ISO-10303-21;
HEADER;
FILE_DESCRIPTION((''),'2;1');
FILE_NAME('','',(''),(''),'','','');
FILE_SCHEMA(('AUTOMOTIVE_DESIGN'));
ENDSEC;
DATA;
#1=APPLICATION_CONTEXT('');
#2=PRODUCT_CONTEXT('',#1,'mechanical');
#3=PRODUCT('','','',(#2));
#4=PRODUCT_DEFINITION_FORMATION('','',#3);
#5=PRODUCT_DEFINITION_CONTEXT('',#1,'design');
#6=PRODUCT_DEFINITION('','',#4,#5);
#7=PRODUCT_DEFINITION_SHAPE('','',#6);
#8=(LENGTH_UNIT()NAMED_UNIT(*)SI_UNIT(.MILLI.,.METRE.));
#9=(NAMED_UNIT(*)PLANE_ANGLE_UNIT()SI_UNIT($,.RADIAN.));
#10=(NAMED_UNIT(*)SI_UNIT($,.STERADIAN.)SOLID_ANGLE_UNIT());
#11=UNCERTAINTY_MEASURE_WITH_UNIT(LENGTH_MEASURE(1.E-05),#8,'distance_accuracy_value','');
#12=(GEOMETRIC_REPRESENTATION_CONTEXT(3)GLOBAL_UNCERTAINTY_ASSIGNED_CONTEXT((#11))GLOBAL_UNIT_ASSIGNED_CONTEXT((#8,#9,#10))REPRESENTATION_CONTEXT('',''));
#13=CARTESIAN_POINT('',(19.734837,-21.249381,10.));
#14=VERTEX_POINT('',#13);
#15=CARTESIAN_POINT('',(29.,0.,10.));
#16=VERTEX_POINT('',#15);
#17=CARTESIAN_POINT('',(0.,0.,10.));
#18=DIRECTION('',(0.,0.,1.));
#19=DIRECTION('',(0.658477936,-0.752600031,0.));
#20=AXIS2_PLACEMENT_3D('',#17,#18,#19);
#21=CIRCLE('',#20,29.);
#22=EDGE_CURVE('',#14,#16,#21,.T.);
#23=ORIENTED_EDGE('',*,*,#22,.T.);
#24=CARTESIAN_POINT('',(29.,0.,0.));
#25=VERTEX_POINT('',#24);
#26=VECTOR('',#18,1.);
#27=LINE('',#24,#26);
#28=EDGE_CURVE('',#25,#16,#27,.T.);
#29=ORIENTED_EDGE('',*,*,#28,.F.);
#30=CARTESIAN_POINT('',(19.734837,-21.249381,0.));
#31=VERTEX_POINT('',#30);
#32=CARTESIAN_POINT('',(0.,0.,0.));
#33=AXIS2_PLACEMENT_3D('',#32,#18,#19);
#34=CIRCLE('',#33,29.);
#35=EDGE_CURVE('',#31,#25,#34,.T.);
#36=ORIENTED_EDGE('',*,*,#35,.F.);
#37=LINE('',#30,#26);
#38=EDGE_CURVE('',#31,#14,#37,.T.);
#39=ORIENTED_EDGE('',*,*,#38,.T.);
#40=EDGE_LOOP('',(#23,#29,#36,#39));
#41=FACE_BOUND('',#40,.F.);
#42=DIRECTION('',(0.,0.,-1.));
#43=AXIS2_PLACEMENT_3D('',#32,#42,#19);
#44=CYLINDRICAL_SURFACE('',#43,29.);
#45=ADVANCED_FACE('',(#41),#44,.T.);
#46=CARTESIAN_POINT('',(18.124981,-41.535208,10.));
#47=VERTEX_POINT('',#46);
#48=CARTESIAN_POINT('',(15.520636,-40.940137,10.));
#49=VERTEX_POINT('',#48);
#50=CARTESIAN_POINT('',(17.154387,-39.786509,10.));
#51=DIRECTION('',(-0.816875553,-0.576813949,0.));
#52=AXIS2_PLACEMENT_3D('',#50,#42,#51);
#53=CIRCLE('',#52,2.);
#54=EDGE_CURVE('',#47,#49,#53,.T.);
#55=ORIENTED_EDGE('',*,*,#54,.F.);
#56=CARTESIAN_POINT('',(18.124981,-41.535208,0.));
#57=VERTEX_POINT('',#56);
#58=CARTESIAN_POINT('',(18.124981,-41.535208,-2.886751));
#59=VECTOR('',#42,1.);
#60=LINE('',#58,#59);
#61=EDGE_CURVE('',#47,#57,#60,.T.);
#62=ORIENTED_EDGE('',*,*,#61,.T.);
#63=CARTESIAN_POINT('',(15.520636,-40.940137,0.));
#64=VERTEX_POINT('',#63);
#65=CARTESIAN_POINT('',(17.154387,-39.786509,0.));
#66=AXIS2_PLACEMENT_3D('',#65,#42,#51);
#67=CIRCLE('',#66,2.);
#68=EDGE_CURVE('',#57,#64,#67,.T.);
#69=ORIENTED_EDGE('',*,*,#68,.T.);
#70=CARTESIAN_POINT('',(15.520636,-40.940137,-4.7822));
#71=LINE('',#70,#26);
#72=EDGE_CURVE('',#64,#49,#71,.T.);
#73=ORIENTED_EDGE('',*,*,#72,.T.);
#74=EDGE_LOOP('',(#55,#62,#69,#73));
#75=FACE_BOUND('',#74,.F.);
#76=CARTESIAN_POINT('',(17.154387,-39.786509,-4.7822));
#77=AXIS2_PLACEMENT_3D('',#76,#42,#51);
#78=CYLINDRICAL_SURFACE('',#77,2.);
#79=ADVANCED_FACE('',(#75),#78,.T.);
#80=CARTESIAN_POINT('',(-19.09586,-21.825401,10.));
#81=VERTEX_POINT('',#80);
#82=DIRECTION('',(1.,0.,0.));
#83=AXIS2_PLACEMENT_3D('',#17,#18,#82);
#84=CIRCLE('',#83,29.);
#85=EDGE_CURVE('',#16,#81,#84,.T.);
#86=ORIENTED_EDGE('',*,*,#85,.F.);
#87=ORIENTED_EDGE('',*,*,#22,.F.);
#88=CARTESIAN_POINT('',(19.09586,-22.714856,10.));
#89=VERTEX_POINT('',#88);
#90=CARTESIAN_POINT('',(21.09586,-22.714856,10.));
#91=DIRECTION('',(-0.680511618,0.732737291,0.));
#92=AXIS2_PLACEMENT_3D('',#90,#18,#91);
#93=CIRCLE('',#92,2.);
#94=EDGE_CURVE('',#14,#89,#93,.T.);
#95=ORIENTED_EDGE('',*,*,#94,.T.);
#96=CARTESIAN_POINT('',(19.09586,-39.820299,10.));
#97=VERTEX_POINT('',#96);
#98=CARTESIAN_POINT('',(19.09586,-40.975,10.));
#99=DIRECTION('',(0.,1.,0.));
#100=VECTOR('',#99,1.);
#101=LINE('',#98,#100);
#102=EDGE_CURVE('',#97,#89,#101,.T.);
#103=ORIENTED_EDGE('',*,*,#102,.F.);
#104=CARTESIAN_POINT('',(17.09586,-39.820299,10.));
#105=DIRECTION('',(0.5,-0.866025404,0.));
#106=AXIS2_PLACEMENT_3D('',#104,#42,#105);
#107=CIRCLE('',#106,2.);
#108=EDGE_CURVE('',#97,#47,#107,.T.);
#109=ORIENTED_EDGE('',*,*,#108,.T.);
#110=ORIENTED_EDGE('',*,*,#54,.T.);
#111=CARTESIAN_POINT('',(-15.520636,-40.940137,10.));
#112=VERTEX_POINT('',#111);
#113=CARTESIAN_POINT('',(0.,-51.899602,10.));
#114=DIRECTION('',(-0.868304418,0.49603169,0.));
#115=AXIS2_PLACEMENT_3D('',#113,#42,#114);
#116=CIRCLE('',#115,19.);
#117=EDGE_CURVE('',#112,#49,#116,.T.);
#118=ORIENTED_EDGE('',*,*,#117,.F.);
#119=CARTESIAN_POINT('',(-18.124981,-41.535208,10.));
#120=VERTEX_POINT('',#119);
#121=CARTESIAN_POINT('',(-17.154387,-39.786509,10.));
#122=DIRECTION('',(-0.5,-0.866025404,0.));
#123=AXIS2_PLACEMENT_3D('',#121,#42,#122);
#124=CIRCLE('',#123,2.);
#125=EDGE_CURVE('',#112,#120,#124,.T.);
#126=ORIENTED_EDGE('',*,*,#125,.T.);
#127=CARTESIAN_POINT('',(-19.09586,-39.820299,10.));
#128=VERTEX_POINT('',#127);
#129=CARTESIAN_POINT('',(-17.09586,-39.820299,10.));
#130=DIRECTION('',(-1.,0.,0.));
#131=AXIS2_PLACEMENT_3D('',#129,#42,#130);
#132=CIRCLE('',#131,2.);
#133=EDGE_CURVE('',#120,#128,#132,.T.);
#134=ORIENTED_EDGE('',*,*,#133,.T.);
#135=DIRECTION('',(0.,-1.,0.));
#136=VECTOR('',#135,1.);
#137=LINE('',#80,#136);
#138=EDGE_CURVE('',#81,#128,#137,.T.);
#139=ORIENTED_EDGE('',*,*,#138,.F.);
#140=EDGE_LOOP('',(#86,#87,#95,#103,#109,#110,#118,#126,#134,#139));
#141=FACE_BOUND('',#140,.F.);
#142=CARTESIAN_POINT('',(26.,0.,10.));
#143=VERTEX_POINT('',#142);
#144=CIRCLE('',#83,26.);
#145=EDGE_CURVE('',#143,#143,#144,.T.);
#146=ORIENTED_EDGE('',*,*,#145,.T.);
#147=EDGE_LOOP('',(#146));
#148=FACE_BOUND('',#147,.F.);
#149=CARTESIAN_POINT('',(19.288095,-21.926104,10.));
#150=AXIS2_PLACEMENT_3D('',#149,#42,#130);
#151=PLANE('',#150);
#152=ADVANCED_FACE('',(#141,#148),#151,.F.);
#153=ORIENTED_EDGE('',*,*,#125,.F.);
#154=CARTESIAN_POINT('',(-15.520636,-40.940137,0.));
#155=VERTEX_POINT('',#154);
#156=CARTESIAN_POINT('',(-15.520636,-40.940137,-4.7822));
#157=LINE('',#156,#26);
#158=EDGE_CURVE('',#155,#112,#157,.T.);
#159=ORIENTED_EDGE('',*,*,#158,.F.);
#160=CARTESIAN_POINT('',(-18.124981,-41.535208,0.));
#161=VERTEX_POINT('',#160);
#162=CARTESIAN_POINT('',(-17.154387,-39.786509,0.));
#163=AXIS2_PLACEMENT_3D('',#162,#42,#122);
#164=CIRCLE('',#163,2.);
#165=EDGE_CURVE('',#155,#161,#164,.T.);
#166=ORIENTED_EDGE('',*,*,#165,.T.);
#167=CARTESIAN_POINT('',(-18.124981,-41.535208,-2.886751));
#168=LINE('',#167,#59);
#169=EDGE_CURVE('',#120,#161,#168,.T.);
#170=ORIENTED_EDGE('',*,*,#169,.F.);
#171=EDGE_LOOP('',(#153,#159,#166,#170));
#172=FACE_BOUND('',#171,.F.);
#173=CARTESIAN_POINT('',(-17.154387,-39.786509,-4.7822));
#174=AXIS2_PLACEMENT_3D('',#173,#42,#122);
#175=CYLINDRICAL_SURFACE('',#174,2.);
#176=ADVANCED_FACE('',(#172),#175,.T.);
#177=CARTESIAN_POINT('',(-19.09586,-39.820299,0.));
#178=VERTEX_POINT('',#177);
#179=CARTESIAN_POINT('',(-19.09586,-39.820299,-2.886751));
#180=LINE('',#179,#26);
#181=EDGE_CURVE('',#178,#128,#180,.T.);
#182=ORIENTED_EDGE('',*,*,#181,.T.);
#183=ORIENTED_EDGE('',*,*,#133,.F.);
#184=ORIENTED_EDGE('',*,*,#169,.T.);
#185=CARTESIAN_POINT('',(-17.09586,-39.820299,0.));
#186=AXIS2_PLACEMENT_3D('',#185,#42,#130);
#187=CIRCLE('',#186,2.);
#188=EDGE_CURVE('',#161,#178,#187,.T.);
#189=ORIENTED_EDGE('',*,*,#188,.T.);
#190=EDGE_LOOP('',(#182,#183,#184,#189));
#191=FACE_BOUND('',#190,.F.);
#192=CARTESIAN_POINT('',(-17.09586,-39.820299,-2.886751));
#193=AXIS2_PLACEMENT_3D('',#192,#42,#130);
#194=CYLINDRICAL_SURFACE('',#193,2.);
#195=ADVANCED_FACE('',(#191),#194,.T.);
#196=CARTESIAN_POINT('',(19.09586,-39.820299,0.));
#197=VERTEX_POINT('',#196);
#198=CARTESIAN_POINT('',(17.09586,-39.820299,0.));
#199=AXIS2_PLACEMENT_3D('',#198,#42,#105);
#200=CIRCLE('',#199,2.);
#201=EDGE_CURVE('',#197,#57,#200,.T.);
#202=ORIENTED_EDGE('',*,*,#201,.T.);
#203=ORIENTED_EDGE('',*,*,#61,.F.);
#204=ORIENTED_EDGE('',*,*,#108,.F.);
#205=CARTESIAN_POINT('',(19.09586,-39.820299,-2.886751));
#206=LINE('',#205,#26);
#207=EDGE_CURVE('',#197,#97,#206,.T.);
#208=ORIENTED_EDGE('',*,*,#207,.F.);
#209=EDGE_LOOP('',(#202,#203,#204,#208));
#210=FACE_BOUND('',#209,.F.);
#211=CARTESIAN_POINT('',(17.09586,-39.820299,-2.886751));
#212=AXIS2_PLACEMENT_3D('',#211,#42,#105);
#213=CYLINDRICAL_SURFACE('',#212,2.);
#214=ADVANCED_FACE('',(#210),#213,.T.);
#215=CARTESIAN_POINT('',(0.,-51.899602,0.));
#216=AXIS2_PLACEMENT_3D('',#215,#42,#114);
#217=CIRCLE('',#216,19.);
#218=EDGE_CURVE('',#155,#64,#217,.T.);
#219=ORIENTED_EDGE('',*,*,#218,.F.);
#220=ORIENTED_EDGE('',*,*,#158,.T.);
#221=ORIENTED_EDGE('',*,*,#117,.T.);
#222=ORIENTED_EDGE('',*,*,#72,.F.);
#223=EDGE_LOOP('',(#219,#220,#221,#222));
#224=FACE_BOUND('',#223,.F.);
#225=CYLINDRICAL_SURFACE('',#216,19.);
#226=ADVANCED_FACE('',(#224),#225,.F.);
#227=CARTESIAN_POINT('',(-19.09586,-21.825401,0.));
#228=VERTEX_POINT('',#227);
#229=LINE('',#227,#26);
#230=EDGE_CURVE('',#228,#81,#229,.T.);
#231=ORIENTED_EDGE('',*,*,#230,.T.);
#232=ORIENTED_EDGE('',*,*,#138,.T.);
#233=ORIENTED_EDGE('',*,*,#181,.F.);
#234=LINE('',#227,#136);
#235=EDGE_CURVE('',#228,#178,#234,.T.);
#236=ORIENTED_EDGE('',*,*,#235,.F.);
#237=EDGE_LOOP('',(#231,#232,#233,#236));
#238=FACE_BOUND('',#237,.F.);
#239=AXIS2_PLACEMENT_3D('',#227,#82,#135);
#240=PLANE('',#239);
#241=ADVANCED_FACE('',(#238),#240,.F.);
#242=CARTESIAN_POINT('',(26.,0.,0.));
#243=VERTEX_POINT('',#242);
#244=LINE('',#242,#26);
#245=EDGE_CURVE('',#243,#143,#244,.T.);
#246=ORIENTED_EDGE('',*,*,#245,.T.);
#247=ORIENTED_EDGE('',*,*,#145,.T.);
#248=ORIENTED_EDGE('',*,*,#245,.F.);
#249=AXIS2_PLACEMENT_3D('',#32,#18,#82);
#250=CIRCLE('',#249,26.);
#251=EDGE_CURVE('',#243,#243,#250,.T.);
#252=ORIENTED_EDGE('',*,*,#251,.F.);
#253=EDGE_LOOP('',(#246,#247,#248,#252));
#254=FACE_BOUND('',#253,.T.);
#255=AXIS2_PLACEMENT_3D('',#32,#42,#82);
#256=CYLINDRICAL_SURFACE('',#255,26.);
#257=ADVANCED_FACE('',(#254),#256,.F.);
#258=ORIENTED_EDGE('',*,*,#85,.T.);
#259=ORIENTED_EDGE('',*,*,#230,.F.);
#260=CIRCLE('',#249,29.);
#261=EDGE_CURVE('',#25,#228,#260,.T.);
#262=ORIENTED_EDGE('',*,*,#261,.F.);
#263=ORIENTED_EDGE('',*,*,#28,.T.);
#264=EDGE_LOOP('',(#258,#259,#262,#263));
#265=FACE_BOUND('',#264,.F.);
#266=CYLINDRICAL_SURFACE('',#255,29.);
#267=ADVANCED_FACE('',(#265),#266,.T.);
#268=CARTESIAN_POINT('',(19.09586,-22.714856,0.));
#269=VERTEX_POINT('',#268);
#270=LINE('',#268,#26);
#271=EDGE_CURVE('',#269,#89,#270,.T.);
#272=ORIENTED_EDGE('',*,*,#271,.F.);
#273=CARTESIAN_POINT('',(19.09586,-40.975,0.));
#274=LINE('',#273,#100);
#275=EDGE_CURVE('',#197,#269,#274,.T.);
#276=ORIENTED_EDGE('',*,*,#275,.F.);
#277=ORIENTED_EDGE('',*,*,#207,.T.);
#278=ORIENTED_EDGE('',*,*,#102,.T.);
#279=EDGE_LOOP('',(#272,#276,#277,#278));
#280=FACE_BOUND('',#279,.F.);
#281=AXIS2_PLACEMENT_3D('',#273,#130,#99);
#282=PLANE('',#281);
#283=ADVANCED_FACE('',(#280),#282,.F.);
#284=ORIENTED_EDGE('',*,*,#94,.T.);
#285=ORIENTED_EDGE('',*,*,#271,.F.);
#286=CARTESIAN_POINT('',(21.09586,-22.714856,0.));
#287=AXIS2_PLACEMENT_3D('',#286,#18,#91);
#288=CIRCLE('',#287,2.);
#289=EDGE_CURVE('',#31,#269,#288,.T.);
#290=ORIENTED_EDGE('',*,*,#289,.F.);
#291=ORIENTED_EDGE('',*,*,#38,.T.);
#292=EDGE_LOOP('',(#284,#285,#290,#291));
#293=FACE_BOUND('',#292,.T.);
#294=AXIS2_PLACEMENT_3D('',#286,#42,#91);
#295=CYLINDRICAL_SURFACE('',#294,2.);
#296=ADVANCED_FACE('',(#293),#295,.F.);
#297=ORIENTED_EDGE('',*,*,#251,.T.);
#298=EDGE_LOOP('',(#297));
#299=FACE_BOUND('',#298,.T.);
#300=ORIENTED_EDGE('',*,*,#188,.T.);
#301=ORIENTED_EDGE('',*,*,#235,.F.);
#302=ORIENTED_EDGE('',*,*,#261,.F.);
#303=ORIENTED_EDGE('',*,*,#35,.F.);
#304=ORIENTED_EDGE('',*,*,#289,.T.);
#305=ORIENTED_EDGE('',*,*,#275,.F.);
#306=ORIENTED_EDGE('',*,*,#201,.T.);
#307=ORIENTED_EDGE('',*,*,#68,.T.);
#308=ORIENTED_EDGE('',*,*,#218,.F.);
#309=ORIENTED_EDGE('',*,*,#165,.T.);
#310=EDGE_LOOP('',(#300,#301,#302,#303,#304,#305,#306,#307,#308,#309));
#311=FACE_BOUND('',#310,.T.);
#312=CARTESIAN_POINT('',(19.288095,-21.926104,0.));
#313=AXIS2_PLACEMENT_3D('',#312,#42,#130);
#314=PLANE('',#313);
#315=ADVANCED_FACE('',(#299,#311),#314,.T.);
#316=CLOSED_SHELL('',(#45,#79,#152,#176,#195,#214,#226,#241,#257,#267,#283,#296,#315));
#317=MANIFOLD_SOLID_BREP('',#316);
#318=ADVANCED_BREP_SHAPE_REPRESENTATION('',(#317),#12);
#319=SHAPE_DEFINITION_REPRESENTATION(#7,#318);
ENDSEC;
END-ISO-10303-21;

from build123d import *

# Parameters (mm, degrees)
F0_R        = 26
F1_DEPTH    = 10
F2_T1_DEPTH = 10
F2_T3_DEPTH = 15.7735026919
F2_T5_DEPTH = 19.5643999635


# Not quite as in the source:
# - a fillet or chamfer that OpenCascade refuses, or shapes differently, is made with other operations: its cross-section is extruded or revolved along the edge and cut away or added


with BuildPart() as f1:
    # F0 (on Top) → F1 (new body)
    with BuildSketch(Plane.XY):
        with BuildLine():
            ThreePointArc((19.0958601534, -21.8254009127), (26.4081421578, -11.9837401413), (29, 0))
            ThreePointArc((29, 0), (-11.9837401413, 26.4081421578), (-19.0958601534, -21.8254009127))
            ThreePointArc((-19.0958601534, -21.8254009127), (0, -29), (19.0958601534, -21.8254009127))
        make_face()
        Circle(F0_R, mode=Mode.SUBTRACT)
        with BuildLine():
            ThreePointArc((19.0958601534, -21.8254009127), (0, -29), (-19.0958601534, -21.8254009127))
            Line((-19.0958601534, -21.8254009127), (-19.0958601534, -40.975))
            ThreePointArc((-19.0958601534, -40.975), (0, -29.8996567452), (19.0958601534, -40.975))
            Line((19.0958601534, -40.975), (19.0958601534, -21.8254009127))
        make_face()
        with BuildLine():
            ThreePointArc((19.0958601534, -40.975), (0, -29.8996567452), (-19.0958601534, -40.975))
            Line((-19.0958601534, -40.975), (-16.4977839421, -42.475))
            ThreePointArc((-16.4977839421, -42.475), (0, -32.8996021136), (16.4977839421, -42.475))
            Line((16.4977839421, -42.475), (19.0958601534, -40.975))
        make_face()
    extrude(amount=F1_DEPTH)

    # F2: fillet of radius 2 on 5 edges, made by hand

    # F2_s2 → F2_t1 (join)
    with BuildSketch(Plane.XY):
        with BuildLine():
            ThreePointArc((19.7348369177, -21.2493814458), (19.2625507863, -21.9154958064), (19.0958601534, -22.7148560283))
            Line((19.0958601534, -22.7148560283), (19.0958601534, -21.8254009127))
            ThreePointArc((19.0958601534, -21.8254009127), (19.4174846045, -21.5397607144), (19.7348369177, -21.2493814458))
        make_face()
    extrude(amount=F2_T1_DEPTH)

    # F2_s4 → F2_t3 (cut)
    with BuildSketch(Plane.XY.offset(-2.8867513459)):
        with BuildLine():
            ThreePointArc((-19.0958601534, -39.8202994616), (-18.827910961, -40.8202994616), (-18.0958601534, -41.5523502692))
            Line((-18.0958601534, -41.5523502692), (-19.0958601534, -40.975))
            Line((-19.0958601534, -40.975), (-19.0958601534, -39.8202994616))
        make_face()
        with BuildLine():
            ThreePointArc((18.0958601534, -41.5523502692), (18.827910961, -40.8202994616), (19.0958601534, -39.8202994616))
            Line((19.0958601534, -39.8202994616), (19.0958601534, -40.975))
            Line((19.0958601534, -40.975), (18.0958601534, -41.5523502692))
        make_face()
    extrude(amount=F2_T3_DEPTH, mode=Mode.SUBTRACT)

    # F2_s6 → F2_t5 (cut)
    with BuildSketch(Plane.XY.offset(-4.7821999818)):
        with BuildLine():
            ThreePointArc((-18.1543866102, -41.5185600036), (-16.7253721793, -41.7399540041), (-15.5206355044, -40.940137093))
            ThreePointArc((-15.5206355044, -40.940137093), (-16.0275933003, -41.6958649061), (-16.4977839421, -42.475))
            Line((-16.4977839421, -42.475), (-18.1543866102, -41.5185600036))
        make_face()
        with BuildLine():
            ThreePointArc((15.5206355044, -40.940137093), (16.7253721793, -41.7399540041), (18.1543866102, -41.5185600036))
            Line((18.1543866102, -41.5185600036), (16.4977839421, -42.475))
            ThreePointArc((16.4977839421, -42.475), (16.0275933003, -41.6958649061), (15.5206355044, -40.940137093))
        make_face()
    extrude(amount=F2_T5_DEPTH, mode=Mode.SUBTRACT)


solid = f1.part
